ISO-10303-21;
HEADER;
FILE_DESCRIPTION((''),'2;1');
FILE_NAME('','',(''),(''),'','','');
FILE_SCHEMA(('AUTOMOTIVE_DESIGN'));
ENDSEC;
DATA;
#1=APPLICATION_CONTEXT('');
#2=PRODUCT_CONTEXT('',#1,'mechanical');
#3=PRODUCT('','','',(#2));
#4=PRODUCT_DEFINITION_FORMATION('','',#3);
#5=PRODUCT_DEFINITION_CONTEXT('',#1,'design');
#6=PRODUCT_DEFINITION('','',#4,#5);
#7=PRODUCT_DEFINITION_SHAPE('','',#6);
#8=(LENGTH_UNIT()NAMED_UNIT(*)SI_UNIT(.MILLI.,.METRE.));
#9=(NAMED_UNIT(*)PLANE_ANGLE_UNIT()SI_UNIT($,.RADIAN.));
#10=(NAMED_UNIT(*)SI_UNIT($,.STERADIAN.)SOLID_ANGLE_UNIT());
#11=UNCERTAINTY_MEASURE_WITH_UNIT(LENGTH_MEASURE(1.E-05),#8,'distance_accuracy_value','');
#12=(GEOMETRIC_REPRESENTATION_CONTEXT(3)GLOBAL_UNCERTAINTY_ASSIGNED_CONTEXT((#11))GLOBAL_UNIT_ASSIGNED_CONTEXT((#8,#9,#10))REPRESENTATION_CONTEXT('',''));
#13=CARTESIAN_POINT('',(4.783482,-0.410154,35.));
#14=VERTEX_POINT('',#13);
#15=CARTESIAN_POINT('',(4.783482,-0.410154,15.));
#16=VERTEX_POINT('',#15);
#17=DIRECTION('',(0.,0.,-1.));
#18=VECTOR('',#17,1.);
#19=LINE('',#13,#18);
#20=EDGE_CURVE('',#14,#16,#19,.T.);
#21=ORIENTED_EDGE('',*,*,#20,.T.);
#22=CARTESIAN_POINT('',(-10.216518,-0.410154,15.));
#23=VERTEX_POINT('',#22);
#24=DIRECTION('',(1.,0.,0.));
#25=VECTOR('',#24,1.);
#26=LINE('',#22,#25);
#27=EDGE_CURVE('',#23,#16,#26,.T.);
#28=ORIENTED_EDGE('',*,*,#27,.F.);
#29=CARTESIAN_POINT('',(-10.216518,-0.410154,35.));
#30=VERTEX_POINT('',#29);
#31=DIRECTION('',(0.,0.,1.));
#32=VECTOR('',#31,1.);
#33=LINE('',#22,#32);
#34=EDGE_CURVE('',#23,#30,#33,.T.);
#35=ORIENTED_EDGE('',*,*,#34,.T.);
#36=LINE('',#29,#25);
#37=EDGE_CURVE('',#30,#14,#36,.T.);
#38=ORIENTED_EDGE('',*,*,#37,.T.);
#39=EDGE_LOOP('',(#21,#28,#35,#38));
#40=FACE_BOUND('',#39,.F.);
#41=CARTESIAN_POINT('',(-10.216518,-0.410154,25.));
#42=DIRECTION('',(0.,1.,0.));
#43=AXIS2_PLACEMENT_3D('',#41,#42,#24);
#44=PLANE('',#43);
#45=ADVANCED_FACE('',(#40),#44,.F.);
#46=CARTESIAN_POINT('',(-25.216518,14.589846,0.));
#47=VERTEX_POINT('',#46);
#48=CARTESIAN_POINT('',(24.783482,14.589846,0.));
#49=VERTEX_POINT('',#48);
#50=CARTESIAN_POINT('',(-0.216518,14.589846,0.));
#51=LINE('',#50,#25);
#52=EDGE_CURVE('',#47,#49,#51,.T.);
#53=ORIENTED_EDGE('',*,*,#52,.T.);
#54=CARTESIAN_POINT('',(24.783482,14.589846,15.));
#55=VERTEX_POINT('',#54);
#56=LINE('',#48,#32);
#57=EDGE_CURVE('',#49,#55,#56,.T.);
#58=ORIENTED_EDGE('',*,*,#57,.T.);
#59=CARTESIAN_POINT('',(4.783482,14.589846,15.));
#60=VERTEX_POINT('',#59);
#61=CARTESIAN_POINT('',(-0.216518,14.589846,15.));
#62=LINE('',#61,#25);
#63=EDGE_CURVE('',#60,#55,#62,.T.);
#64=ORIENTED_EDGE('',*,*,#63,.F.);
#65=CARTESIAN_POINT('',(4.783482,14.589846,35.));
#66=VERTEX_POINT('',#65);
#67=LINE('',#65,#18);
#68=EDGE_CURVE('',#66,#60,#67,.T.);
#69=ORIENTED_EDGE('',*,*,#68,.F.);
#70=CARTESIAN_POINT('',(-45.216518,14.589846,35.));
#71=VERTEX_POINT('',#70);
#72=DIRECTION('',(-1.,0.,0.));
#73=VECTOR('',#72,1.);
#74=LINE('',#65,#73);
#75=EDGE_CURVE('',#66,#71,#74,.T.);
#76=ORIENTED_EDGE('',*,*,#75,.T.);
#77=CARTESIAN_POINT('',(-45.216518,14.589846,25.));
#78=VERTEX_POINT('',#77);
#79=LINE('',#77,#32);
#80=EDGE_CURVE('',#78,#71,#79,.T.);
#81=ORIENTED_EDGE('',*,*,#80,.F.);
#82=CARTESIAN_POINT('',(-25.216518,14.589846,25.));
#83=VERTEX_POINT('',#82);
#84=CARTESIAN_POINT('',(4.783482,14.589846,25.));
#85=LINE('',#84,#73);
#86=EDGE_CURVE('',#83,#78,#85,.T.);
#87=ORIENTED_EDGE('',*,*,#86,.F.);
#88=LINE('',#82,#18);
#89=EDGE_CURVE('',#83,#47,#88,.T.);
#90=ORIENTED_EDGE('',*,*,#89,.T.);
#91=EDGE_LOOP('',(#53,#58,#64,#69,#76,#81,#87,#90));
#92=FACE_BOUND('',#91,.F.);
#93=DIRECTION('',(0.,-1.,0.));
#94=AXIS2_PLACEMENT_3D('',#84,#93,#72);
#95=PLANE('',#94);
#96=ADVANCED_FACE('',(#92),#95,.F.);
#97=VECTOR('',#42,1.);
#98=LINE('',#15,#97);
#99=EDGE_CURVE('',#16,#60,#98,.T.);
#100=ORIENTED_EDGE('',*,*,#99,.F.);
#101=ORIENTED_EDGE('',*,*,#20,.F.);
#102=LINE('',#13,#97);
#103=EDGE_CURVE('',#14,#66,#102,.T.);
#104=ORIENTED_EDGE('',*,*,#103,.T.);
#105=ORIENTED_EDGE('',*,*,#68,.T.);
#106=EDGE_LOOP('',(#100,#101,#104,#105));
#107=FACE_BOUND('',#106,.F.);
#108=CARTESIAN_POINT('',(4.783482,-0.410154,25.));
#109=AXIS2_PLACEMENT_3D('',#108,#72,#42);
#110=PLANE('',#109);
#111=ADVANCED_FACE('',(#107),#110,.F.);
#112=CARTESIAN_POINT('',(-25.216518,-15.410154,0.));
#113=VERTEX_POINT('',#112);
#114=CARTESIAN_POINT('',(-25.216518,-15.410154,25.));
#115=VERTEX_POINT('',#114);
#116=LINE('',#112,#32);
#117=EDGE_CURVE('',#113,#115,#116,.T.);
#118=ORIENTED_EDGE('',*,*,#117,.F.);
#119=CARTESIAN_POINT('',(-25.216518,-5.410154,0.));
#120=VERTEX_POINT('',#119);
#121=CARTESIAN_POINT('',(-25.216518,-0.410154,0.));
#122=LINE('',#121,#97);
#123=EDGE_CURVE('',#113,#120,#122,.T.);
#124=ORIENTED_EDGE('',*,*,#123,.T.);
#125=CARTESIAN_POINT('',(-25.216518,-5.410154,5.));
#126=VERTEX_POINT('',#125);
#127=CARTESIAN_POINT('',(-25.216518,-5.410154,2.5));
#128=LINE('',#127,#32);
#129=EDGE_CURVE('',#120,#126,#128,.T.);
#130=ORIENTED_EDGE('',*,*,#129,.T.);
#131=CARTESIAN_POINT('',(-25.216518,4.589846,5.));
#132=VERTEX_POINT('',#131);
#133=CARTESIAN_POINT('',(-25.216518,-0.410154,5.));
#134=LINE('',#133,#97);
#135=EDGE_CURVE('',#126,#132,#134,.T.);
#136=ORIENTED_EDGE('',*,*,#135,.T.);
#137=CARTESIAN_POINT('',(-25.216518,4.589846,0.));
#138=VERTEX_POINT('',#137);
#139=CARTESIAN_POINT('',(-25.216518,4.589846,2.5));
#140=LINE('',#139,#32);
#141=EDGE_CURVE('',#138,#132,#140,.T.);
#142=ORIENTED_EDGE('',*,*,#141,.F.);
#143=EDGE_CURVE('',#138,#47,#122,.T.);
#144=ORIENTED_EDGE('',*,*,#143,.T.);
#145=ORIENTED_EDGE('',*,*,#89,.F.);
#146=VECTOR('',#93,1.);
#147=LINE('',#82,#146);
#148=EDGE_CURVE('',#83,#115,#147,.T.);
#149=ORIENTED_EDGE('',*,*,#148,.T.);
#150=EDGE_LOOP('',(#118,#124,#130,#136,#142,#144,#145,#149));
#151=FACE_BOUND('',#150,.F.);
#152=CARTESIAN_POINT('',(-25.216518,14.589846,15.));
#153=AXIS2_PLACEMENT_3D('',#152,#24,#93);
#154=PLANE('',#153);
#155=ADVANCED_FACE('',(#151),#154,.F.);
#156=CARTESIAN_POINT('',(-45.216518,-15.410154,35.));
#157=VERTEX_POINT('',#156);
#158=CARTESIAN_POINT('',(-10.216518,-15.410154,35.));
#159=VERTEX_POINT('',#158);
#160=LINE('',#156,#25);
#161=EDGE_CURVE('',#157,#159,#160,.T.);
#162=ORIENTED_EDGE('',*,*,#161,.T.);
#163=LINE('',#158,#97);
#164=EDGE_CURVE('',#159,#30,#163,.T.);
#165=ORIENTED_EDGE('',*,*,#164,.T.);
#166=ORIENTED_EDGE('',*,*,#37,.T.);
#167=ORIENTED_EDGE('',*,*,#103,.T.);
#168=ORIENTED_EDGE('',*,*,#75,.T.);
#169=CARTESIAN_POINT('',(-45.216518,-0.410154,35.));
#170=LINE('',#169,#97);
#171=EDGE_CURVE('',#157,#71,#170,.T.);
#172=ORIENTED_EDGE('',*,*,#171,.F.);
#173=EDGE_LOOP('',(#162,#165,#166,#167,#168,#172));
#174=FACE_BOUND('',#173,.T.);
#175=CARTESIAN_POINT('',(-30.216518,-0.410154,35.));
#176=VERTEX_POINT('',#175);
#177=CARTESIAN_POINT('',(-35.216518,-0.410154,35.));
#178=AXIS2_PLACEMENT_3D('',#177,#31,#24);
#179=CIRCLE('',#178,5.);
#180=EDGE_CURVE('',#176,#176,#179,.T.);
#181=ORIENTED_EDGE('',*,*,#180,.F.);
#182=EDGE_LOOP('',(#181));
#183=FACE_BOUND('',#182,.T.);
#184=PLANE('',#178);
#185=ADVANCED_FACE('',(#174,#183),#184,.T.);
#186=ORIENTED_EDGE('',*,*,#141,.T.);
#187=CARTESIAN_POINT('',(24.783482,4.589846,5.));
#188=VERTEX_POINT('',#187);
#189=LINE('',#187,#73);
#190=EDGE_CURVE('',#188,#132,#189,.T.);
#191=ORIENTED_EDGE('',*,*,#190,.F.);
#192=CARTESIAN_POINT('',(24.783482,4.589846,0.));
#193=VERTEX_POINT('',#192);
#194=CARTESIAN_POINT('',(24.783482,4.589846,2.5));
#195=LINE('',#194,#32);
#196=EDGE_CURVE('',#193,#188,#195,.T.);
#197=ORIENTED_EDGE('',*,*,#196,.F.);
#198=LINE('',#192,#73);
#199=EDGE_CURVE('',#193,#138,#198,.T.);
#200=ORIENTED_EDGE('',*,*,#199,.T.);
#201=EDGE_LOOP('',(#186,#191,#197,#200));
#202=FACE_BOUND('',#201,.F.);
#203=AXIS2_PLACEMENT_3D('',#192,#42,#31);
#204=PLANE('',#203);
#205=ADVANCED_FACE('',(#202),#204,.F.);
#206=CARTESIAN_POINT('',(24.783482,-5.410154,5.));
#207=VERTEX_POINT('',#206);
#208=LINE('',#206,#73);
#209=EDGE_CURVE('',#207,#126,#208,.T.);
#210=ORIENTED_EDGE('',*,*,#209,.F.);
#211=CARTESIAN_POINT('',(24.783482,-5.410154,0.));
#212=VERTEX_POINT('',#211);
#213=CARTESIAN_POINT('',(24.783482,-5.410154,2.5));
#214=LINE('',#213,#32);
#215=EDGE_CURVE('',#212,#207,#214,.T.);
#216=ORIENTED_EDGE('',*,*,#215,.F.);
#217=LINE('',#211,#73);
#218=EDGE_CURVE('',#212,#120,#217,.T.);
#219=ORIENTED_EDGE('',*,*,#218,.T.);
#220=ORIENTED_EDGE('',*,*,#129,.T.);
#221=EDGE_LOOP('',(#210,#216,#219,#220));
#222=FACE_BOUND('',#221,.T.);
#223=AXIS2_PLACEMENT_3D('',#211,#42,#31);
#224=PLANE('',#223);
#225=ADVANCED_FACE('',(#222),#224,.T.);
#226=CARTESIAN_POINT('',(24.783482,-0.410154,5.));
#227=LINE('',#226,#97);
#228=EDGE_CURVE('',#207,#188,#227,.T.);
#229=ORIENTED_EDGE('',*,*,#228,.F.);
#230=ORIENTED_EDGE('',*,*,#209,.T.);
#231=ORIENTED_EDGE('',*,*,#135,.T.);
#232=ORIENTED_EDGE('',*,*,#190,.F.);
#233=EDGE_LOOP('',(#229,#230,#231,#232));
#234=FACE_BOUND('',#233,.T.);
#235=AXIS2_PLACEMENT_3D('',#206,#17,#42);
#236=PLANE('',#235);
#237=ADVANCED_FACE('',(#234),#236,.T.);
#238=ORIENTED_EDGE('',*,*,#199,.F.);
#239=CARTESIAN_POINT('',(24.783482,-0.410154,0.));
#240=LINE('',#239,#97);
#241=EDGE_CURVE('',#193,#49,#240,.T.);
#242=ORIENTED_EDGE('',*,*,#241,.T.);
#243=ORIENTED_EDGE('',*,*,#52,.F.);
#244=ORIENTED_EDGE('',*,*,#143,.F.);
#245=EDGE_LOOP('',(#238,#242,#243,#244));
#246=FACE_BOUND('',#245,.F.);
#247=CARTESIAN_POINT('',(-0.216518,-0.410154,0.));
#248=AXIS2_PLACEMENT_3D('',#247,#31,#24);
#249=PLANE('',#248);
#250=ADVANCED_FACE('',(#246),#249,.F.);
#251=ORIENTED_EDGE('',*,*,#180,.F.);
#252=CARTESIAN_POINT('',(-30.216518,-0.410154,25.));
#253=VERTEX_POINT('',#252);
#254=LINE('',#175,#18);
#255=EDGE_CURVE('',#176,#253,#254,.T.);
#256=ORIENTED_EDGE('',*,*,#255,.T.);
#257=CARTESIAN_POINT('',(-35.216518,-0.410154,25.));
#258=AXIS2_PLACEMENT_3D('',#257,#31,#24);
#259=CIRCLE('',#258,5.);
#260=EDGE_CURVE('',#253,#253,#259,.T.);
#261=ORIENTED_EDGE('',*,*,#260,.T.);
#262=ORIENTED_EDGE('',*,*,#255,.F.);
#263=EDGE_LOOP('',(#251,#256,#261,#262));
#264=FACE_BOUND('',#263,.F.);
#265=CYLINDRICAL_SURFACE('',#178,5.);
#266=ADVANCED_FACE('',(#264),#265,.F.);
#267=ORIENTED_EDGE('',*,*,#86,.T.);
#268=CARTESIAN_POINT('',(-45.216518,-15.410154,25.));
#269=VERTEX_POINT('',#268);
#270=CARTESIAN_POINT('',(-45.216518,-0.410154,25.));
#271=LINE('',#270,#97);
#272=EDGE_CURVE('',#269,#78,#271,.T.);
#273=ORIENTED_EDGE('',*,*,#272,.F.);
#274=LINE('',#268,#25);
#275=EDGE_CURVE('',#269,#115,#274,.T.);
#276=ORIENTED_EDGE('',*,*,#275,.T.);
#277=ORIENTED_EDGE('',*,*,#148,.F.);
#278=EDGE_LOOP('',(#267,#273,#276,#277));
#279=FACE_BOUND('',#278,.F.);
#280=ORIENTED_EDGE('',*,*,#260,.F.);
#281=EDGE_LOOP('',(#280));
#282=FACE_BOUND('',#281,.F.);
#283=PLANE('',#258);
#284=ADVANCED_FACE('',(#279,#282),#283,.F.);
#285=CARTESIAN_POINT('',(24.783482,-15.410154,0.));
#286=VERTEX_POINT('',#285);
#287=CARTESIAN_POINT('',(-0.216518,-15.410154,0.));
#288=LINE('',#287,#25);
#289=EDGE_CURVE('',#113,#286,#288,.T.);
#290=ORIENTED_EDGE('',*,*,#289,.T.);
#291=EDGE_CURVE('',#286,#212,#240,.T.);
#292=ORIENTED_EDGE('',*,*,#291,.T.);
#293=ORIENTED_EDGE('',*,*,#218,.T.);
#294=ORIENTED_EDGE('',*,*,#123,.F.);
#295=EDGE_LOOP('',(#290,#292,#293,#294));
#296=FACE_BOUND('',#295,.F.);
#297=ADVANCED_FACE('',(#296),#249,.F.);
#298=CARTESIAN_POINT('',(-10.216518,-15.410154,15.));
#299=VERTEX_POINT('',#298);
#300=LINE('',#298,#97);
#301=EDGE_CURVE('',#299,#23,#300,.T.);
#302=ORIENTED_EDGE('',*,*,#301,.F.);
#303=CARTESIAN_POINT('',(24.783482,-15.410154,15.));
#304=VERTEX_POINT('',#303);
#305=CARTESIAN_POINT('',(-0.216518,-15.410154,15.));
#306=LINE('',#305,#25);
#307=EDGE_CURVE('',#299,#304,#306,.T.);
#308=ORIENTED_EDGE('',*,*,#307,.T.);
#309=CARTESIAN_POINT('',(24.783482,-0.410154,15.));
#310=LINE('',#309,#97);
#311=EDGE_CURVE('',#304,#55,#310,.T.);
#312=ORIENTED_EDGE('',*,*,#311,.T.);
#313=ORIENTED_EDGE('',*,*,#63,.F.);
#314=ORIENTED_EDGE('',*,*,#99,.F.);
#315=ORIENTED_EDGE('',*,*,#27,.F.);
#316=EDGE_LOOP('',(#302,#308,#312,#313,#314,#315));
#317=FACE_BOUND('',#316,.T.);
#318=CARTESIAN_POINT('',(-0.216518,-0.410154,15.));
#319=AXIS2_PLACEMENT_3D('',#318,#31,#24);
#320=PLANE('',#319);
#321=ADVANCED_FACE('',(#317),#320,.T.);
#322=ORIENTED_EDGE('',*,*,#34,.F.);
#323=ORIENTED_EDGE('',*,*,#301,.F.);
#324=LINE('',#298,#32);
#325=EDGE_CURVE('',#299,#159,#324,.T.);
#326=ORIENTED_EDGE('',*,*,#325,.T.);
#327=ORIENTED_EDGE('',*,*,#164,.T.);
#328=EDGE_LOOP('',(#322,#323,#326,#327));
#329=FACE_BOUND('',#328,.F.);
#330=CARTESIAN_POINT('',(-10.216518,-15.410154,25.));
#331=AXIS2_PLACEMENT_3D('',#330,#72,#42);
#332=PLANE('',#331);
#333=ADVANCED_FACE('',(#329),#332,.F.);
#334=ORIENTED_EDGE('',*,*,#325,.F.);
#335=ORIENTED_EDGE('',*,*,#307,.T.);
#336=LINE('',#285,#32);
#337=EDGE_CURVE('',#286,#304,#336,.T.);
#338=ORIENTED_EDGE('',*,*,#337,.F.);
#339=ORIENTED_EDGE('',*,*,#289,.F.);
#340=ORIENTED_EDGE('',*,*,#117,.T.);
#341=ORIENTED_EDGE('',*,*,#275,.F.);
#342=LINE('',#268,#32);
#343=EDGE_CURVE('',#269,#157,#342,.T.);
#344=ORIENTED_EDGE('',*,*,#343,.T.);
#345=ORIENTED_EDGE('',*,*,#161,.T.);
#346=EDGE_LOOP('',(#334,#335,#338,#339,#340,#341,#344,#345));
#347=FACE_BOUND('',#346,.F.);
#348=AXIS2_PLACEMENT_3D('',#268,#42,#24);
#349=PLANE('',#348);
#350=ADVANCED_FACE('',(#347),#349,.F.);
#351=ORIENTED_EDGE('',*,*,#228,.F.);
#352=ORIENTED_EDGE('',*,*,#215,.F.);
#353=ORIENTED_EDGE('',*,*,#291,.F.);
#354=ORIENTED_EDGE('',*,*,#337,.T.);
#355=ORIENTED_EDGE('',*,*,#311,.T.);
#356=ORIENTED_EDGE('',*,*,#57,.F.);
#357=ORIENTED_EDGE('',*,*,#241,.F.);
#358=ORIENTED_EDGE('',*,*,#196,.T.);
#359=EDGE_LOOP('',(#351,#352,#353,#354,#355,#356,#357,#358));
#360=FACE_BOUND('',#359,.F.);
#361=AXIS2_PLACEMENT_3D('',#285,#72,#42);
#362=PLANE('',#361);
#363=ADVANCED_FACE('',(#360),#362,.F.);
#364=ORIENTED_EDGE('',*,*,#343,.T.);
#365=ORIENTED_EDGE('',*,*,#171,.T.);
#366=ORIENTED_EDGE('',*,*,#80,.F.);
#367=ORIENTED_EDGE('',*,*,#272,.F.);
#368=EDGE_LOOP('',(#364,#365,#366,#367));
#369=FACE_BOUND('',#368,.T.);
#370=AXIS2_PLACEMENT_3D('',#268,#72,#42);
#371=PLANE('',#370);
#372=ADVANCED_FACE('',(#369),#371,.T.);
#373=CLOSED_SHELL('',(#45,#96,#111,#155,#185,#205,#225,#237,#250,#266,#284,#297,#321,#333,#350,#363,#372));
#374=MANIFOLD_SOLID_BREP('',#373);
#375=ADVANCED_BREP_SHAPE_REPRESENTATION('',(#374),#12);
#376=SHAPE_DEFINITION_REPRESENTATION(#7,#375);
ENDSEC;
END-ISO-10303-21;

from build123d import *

# Parameters (mm, degrees)
F0_W     = 50
F0_H     = 30
F1_DEPTH = 15
F2_W     = 10
F2_H     = 5
F3_DEPTH = 50
F5_DEPTH = 10
F6_W     = 20
F6_H     = 30
F7_DEPTH = 10
F8_R     = 5
F9_DEPTH = 25


with BuildPart() as f1:
    # F0 (on Top) → F1 (new body)
    with BuildSketch(Plane.XY):
        with Locations((-0.216518305, -0.4101539962)):
            Rectangle(F0_W, F0_H)
    extrude(amount=F1_DEPTH)

    # F2 (on face) → F3 (cut)
    with BuildSketch(Plane.YZ.offset(24.783481695)):
        with Locations((-0.4101539962, 2.5)):
            Rectangle(F2_W, F2_H)
    extrude(amount=-F3_DEPTH, mode=Mode.SUBTRACT)

    # F4 (on face) → F5 (join)
    with BuildSketch(Plane.XY.offset(15)):
        Polygon((-25.216518305, 14.5898460038), (-25.216518305, -15.4101539962), (-10.216518305, -15.4101539962), (-10.216518305, -0.4101539962), (4.783481695, -0.4101539962), (4.783481695, 14.5898460038), align=None)
    extrude(amount=F5_DEPTH)

    # F6 (on face) → F7 (join)
    with BuildSketch(Plane.XY.offset(25)):
        with Locations((-35.216518305, -0.4101539962)):
            Rectangle(F6_W, F6_H)
        Polygon((-25.216518305, 14.5898460038), (-25.216518305, -15.4101539962), (-10.216518305, -15.4101539962), (-10.216518305, -0.4101539962), (4.783481695, -0.4101539962), (4.783481695, 14.5898460038), align=None)
    extrude(amount=F7_DEPTH)

    # F8 (on face) → F9 (cut)
    with BuildSketch(Plane.XY.offset(35)):
        with Locations((-35.216518305, -0.4101539962)):
            Circle(F8_R)
    extrude(amount=-F9_DEPTH, mode=Mode.SUBTRACT)


solid = f1.part
